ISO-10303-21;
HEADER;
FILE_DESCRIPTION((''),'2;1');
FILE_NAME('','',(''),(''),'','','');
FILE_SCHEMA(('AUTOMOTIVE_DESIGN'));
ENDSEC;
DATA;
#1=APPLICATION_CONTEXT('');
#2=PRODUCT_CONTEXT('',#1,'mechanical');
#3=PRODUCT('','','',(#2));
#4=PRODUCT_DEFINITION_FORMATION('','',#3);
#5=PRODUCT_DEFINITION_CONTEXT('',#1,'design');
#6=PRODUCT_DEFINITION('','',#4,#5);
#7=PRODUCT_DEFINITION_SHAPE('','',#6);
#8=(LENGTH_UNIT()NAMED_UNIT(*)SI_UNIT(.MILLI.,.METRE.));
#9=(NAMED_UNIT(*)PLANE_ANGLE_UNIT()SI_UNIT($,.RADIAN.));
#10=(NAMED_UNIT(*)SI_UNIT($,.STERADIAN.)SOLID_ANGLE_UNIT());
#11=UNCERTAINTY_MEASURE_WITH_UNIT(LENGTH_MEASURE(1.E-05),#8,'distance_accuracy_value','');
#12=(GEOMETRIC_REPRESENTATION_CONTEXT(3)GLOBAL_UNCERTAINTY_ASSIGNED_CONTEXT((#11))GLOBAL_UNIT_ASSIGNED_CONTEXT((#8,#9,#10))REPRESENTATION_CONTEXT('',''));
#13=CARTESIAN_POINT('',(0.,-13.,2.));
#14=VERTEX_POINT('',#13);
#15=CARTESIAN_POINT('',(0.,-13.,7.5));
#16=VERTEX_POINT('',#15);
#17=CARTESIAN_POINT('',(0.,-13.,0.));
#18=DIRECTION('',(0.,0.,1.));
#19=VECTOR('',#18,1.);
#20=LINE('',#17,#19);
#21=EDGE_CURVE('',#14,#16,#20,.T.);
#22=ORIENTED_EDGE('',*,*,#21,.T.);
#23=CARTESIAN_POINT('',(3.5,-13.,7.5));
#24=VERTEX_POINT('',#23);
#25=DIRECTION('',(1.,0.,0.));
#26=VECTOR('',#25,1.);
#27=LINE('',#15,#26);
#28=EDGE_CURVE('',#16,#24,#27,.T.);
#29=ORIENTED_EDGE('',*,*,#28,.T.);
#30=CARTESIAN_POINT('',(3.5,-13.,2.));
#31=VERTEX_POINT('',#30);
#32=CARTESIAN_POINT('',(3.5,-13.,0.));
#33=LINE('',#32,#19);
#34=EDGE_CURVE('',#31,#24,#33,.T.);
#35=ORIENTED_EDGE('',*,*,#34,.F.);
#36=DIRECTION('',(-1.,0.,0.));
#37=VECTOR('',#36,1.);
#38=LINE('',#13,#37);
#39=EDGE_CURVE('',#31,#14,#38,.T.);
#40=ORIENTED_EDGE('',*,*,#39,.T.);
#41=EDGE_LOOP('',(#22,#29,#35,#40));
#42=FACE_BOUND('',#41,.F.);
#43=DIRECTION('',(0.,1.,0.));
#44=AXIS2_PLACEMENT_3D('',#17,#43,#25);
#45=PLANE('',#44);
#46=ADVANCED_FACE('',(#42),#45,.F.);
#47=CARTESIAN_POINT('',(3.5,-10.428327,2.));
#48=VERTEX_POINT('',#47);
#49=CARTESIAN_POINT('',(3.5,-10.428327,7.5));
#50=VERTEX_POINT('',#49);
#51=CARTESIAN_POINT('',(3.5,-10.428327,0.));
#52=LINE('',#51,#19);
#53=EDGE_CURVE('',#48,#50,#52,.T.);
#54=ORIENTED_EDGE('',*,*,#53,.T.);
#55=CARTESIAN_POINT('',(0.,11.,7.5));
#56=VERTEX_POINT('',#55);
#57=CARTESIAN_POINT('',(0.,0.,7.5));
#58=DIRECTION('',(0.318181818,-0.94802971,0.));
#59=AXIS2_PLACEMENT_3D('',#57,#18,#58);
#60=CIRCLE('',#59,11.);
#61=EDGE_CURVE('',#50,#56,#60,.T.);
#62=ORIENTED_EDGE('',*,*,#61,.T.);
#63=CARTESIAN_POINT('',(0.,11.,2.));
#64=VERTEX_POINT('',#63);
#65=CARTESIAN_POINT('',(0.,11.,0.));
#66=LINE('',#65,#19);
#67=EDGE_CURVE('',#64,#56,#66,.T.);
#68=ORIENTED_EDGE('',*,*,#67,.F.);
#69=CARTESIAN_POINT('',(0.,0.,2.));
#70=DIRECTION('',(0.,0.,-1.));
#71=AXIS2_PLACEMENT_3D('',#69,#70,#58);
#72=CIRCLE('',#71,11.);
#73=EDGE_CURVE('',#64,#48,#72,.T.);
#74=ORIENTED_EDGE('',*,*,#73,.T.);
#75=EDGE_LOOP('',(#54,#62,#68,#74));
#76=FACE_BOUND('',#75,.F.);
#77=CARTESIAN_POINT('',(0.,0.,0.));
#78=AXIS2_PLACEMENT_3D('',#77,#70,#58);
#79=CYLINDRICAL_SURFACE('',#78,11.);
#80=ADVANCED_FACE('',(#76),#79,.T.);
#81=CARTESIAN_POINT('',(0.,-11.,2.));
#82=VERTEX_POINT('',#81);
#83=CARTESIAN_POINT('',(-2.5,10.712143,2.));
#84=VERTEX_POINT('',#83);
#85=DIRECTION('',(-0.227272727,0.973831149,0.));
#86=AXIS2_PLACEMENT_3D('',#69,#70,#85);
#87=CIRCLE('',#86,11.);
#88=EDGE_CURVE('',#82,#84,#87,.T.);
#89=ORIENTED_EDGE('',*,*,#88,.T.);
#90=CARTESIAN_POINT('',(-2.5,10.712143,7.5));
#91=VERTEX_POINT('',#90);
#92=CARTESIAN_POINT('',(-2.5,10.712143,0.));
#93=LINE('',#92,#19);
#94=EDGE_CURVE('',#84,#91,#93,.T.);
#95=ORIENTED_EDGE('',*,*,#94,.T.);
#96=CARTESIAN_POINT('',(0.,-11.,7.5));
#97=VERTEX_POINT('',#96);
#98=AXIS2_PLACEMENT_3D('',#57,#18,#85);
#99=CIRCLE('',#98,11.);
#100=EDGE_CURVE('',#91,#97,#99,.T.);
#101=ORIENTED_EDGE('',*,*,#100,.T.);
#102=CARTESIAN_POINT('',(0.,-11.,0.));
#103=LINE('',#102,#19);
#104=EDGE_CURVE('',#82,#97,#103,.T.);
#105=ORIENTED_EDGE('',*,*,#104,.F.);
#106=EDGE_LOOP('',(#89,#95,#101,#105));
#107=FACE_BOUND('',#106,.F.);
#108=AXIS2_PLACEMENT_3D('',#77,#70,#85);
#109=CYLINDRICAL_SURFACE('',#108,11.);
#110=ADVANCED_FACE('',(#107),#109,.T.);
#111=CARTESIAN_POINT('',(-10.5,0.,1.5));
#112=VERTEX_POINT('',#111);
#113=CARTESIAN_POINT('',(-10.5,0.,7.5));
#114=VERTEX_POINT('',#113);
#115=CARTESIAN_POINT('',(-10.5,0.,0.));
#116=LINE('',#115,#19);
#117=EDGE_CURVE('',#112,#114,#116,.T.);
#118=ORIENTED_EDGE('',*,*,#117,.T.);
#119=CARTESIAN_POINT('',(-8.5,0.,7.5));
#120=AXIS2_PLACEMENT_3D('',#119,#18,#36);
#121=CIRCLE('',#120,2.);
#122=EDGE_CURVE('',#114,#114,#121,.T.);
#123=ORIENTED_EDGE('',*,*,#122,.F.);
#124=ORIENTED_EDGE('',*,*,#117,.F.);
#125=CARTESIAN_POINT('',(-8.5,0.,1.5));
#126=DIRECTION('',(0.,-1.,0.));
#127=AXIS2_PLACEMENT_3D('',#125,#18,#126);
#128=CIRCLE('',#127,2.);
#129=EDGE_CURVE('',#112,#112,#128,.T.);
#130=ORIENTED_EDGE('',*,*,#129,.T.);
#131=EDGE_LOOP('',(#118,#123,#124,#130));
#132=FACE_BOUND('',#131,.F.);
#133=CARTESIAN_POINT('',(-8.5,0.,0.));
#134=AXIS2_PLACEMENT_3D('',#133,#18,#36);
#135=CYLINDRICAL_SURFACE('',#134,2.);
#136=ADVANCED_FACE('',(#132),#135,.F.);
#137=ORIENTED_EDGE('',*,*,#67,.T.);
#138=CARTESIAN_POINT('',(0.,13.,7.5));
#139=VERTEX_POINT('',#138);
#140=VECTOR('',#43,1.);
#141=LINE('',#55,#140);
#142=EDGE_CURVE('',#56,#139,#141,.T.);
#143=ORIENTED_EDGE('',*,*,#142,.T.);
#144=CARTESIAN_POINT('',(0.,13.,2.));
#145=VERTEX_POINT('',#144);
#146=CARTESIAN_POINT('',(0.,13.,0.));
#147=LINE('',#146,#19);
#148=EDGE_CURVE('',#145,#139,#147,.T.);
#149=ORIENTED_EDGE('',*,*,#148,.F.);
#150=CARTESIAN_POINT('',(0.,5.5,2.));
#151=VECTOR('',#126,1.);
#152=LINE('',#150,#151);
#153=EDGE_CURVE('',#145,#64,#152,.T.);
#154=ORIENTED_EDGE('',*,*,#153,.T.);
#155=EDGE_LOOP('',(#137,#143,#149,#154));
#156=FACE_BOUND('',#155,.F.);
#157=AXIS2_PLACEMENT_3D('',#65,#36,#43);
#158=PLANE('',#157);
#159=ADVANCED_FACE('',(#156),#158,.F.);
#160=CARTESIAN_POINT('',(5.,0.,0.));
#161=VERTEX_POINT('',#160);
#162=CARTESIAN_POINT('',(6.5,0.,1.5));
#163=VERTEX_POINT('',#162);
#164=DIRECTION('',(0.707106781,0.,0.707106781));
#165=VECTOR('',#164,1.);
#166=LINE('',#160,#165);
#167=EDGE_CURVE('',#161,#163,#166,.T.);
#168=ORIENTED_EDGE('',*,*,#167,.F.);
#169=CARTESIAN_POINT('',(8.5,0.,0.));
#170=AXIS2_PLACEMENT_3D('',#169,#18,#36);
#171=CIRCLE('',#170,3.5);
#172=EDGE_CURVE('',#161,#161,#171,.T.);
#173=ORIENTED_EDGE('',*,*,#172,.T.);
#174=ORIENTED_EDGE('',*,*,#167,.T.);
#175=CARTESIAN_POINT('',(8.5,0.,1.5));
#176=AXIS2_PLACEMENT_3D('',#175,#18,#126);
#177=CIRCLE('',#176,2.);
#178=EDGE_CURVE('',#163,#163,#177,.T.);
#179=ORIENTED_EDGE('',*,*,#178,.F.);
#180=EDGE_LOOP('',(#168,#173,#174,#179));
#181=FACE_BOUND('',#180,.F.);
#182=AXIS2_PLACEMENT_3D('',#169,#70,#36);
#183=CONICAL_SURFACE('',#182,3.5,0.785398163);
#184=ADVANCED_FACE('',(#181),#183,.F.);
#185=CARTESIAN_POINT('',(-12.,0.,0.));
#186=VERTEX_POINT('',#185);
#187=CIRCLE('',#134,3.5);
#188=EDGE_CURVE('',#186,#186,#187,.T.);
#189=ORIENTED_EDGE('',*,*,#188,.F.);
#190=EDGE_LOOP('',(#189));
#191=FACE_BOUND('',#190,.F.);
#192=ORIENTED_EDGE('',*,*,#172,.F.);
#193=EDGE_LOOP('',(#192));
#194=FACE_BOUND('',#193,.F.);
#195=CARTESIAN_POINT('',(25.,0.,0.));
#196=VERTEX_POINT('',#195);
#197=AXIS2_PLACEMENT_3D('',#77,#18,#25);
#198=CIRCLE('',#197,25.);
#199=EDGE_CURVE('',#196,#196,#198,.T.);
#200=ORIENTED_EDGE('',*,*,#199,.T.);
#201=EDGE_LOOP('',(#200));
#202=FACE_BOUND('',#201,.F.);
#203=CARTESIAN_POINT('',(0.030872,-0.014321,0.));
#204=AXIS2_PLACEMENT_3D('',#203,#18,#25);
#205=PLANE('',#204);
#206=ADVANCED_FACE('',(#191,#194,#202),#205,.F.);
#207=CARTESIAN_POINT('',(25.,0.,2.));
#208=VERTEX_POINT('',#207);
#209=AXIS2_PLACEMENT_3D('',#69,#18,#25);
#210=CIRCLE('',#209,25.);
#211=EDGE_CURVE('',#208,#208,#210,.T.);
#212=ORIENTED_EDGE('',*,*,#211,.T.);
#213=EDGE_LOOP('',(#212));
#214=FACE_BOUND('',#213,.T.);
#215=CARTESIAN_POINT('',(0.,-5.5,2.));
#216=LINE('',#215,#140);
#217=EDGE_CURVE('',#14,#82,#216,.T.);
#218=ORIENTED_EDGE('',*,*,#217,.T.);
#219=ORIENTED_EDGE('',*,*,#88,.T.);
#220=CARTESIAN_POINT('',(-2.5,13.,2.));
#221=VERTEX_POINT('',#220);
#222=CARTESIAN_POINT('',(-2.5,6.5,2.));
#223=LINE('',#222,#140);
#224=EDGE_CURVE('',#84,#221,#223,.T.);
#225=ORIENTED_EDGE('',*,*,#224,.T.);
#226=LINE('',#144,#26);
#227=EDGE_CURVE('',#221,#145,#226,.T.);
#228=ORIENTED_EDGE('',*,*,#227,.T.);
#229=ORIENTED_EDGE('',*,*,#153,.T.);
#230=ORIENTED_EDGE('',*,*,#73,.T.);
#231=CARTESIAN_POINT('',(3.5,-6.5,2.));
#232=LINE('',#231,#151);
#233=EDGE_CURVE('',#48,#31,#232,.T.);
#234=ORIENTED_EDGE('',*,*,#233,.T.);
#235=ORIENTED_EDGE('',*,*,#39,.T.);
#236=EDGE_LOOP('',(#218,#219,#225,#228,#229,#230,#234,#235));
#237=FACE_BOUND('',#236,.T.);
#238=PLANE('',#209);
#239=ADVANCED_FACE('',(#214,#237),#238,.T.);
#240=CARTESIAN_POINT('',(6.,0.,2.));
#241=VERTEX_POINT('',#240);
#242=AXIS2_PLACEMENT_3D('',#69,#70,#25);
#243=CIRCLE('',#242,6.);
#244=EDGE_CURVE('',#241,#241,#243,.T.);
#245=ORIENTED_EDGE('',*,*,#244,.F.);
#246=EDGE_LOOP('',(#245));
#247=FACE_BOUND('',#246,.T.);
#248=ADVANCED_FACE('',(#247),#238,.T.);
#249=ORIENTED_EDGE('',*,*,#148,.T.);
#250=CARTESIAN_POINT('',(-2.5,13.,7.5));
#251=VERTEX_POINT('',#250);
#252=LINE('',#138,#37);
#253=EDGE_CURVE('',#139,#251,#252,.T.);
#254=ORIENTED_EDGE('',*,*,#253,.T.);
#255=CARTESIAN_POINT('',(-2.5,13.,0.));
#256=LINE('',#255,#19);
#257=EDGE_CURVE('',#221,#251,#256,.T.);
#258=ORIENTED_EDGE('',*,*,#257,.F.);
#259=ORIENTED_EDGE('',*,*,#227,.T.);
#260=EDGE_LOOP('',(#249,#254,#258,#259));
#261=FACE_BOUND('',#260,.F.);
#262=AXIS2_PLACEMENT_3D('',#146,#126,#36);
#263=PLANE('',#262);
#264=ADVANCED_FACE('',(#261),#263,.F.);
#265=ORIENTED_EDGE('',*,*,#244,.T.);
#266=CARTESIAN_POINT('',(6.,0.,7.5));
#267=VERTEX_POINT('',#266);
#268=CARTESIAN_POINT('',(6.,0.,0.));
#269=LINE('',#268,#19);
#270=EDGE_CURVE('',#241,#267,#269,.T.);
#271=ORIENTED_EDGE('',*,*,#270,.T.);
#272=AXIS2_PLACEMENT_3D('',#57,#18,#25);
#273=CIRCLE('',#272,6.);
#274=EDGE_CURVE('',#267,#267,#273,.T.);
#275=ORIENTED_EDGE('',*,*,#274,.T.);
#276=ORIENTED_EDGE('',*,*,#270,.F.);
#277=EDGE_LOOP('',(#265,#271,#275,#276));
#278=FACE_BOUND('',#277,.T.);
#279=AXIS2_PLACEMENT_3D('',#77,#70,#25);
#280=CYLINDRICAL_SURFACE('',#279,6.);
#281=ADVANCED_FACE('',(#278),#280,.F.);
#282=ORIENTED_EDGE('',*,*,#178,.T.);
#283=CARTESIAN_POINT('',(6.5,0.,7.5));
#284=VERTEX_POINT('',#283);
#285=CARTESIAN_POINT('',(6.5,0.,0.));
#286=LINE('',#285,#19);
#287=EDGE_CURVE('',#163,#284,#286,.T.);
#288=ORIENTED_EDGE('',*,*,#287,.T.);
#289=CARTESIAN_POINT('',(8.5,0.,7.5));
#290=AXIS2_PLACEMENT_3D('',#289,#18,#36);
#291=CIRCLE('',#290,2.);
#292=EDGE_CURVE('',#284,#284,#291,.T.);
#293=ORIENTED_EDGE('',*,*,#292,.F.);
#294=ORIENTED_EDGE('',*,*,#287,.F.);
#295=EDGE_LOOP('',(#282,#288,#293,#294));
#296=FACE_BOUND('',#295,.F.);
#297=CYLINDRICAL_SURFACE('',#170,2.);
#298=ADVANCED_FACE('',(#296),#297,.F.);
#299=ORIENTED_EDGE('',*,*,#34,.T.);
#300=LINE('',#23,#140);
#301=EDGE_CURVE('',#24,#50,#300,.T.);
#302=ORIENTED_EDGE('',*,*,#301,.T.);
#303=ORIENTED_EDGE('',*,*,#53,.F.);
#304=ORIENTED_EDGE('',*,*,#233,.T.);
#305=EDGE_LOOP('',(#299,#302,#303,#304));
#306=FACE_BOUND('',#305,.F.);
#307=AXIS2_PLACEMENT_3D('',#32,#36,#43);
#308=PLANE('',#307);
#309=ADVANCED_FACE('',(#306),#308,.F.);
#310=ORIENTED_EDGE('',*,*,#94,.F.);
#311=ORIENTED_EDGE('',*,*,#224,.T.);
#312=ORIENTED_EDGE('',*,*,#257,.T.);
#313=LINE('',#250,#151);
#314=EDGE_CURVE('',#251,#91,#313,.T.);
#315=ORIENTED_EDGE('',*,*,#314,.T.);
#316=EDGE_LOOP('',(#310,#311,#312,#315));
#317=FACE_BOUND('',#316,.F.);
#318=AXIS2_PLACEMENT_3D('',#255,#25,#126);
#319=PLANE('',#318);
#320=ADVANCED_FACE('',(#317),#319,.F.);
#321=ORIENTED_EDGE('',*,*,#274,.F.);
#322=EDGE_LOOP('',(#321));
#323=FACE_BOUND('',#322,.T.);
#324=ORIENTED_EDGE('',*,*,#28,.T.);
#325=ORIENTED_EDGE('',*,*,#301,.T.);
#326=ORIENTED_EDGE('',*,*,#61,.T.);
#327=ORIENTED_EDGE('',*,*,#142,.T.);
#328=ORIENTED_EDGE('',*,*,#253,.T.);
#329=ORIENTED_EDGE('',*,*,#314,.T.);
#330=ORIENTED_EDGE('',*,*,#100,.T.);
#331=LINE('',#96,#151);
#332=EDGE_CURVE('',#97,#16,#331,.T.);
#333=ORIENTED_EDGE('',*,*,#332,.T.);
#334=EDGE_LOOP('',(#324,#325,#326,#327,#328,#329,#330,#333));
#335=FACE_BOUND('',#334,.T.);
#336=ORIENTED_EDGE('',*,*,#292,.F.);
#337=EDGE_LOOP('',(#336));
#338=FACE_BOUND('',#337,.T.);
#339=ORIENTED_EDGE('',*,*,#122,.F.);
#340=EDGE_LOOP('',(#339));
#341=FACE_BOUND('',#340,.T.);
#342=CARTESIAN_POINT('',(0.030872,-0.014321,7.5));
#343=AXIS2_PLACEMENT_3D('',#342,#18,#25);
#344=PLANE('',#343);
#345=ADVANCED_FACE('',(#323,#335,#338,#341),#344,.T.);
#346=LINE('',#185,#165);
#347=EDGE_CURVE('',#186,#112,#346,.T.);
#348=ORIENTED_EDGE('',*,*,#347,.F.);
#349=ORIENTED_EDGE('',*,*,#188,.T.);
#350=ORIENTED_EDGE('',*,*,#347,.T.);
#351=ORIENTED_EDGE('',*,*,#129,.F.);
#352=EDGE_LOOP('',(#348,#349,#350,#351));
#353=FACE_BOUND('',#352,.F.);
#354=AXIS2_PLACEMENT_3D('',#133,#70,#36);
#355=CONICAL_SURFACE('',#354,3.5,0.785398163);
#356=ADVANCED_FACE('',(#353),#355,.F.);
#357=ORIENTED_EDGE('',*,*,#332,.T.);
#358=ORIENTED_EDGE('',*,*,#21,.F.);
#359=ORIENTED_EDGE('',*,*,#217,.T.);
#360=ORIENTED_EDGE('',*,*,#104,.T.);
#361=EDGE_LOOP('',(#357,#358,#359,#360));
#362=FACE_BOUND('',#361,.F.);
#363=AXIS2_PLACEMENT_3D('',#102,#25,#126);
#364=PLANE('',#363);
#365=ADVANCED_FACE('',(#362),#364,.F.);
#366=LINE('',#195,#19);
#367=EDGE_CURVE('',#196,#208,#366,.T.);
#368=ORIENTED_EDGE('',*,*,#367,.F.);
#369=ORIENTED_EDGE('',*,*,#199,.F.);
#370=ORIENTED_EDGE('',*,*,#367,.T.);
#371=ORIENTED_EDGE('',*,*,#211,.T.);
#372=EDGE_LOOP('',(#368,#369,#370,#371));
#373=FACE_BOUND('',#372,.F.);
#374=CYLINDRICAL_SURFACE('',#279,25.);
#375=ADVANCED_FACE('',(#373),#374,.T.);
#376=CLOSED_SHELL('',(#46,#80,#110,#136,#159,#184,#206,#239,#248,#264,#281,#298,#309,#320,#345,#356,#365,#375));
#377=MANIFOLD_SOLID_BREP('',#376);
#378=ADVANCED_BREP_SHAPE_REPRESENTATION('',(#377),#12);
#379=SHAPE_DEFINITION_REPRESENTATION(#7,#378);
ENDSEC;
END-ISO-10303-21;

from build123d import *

# Parameters (mm, degrees)
F0_R           = 25
F0_R_2         = 6
F1_DEPTH       = 2
F2_DEPTH       = 7.5
F5_D           = 4
F5_CSINK_D     = 7
F5_CSINK_ANGLE = 90


# Not quite as in the source:
# - a feature names something its author has since deleted; it is built from what else it names


with BuildPart() as f1:
    # F0 (on Top) → F1 (new body)
    with BuildSketch(Plane.XY):
        Circle(F0_R)
        with BuildLine():
            ThreePointArc((0, 11), (7.7781745931, 7.7781745931), (11, 0))
            ThreePointArc((11, 0), (8.9302855497, -6.4226162893), (3.5, -10.4283268073))
            Line((3.5, -10.4283268073), (3.5, -13))
            Line((3.5, -13), (0, -13))
            Line((0, -13), (0, -11))
            ThreePointArc((0, -11), (-10.9277987049, -1.258258902), (-2.5, 10.7121426428))
            Line((-2.5, 10.7121426428), (-2.5, 13))
            Line((-2.5, 13), (0, 13))
            Line((0, 13), (0, 11))
        make_face(mode=Mode.SUBTRACT)
        with BuildLine():
            ThreePointArc((3.5, -10.4283268073), (8.9302855497, -6.4226162893), (11, 0))
            ThreePointArc((11, 0), (7.7781745931, 7.7781745931), (0, 11))
            ThreePointArc((0, 11), (-1.258258902, 10.9277987049), (-2.5, 10.7121426428))
            ThreePointArc((-2.5, 10.7121426428), (-10.9277987049, -1.258258902), (0, -11))
            ThreePointArc((0, -11), (1.773189939, -10.8561410013), (3.5, -10.4283268073))
        make_face()
        Circle(F0_R_2, mode=Mode.SUBTRACT)
        Circle(F0_R_2)
        with BuildLine():
            ThreePointArc((-2.5, 10.7121426428), (-1.258258902, 10.9277987049), (0, 11))
            Line((0, 11), (0, 13))
            Line((0, 13), (-2.5, 13))
            Line((-2.5, 13), (-2.5, 10.7121426428))
        make_face()
        with BuildLine():
            Line((3.5, -13), (3.5, -10.4283268073))
            ThreePointArc((3.5, -10.4283268073), (1.773189939, -10.8561410013), (0, -11))
            Line((0, -11), (0, -13))
            Line((0, -13), (3.5, -13))
        make_face()
    extrude(amount=F1_DEPTH)

    # F0 (on Top) → F2 (join)
    with BuildSketch(Plane.XY):
        with BuildLine():
            ThreePointArc((3.5, -10.4283268073), (8.9302855497, -6.4226162893), (11, 0))
            ThreePointArc((11, 0), (7.7781745931, 7.7781745931), (0, 11))
            ThreePointArc((0, 11), (-1.258258902, 10.9277987049), (-2.5, 10.7121426428))
            ThreePointArc((-2.5, 10.7121426428), (-10.9277987049, -1.258258902), (0, -11))
            ThreePointArc((0, -11), (1.773189939, -10.8561410013), (3.5, -10.4283268073))
        make_face()
        Circle(F0_R_2, mode=Mode.SUBTRACT)
        with BuildLine():
            Line((3.5, -13), (3.5, -10.4283268073))
            ThreePointArc((3.5, -10.4283268073), (1.773189939, -10.8561410013), (0, -11))
            Line((0, -11), (0, -13))
            Line((0, -13), (3.5, -13))
        make_face()
        with BuildLine():
            ThreePointArc((-2.5, 10.7121426428), (-1.258258902, 10.9277987049), (0, 11))
            Line((0, 11), (0, 13))
            Line((0, 13), (-2.5, 13))
            Line((-2.5, 13), (-2.5, 10.7121426428))
        make_face()
    extrude(amount=F2_DEPTH)

    # F5 (through all)
    with Locations(Plane(origin=(0, 0, 0), x_dir=(1, 0, 0), z_dir=(0, 0, -1))):
        with Locations((-8.5, 0), (8.5, 0)):
            CounterSinkHole(F5_D / 2, F5_CSINK_D / 2, counter_sink_angle=F5_CSINK_ANGLE)


solid = f1.part
